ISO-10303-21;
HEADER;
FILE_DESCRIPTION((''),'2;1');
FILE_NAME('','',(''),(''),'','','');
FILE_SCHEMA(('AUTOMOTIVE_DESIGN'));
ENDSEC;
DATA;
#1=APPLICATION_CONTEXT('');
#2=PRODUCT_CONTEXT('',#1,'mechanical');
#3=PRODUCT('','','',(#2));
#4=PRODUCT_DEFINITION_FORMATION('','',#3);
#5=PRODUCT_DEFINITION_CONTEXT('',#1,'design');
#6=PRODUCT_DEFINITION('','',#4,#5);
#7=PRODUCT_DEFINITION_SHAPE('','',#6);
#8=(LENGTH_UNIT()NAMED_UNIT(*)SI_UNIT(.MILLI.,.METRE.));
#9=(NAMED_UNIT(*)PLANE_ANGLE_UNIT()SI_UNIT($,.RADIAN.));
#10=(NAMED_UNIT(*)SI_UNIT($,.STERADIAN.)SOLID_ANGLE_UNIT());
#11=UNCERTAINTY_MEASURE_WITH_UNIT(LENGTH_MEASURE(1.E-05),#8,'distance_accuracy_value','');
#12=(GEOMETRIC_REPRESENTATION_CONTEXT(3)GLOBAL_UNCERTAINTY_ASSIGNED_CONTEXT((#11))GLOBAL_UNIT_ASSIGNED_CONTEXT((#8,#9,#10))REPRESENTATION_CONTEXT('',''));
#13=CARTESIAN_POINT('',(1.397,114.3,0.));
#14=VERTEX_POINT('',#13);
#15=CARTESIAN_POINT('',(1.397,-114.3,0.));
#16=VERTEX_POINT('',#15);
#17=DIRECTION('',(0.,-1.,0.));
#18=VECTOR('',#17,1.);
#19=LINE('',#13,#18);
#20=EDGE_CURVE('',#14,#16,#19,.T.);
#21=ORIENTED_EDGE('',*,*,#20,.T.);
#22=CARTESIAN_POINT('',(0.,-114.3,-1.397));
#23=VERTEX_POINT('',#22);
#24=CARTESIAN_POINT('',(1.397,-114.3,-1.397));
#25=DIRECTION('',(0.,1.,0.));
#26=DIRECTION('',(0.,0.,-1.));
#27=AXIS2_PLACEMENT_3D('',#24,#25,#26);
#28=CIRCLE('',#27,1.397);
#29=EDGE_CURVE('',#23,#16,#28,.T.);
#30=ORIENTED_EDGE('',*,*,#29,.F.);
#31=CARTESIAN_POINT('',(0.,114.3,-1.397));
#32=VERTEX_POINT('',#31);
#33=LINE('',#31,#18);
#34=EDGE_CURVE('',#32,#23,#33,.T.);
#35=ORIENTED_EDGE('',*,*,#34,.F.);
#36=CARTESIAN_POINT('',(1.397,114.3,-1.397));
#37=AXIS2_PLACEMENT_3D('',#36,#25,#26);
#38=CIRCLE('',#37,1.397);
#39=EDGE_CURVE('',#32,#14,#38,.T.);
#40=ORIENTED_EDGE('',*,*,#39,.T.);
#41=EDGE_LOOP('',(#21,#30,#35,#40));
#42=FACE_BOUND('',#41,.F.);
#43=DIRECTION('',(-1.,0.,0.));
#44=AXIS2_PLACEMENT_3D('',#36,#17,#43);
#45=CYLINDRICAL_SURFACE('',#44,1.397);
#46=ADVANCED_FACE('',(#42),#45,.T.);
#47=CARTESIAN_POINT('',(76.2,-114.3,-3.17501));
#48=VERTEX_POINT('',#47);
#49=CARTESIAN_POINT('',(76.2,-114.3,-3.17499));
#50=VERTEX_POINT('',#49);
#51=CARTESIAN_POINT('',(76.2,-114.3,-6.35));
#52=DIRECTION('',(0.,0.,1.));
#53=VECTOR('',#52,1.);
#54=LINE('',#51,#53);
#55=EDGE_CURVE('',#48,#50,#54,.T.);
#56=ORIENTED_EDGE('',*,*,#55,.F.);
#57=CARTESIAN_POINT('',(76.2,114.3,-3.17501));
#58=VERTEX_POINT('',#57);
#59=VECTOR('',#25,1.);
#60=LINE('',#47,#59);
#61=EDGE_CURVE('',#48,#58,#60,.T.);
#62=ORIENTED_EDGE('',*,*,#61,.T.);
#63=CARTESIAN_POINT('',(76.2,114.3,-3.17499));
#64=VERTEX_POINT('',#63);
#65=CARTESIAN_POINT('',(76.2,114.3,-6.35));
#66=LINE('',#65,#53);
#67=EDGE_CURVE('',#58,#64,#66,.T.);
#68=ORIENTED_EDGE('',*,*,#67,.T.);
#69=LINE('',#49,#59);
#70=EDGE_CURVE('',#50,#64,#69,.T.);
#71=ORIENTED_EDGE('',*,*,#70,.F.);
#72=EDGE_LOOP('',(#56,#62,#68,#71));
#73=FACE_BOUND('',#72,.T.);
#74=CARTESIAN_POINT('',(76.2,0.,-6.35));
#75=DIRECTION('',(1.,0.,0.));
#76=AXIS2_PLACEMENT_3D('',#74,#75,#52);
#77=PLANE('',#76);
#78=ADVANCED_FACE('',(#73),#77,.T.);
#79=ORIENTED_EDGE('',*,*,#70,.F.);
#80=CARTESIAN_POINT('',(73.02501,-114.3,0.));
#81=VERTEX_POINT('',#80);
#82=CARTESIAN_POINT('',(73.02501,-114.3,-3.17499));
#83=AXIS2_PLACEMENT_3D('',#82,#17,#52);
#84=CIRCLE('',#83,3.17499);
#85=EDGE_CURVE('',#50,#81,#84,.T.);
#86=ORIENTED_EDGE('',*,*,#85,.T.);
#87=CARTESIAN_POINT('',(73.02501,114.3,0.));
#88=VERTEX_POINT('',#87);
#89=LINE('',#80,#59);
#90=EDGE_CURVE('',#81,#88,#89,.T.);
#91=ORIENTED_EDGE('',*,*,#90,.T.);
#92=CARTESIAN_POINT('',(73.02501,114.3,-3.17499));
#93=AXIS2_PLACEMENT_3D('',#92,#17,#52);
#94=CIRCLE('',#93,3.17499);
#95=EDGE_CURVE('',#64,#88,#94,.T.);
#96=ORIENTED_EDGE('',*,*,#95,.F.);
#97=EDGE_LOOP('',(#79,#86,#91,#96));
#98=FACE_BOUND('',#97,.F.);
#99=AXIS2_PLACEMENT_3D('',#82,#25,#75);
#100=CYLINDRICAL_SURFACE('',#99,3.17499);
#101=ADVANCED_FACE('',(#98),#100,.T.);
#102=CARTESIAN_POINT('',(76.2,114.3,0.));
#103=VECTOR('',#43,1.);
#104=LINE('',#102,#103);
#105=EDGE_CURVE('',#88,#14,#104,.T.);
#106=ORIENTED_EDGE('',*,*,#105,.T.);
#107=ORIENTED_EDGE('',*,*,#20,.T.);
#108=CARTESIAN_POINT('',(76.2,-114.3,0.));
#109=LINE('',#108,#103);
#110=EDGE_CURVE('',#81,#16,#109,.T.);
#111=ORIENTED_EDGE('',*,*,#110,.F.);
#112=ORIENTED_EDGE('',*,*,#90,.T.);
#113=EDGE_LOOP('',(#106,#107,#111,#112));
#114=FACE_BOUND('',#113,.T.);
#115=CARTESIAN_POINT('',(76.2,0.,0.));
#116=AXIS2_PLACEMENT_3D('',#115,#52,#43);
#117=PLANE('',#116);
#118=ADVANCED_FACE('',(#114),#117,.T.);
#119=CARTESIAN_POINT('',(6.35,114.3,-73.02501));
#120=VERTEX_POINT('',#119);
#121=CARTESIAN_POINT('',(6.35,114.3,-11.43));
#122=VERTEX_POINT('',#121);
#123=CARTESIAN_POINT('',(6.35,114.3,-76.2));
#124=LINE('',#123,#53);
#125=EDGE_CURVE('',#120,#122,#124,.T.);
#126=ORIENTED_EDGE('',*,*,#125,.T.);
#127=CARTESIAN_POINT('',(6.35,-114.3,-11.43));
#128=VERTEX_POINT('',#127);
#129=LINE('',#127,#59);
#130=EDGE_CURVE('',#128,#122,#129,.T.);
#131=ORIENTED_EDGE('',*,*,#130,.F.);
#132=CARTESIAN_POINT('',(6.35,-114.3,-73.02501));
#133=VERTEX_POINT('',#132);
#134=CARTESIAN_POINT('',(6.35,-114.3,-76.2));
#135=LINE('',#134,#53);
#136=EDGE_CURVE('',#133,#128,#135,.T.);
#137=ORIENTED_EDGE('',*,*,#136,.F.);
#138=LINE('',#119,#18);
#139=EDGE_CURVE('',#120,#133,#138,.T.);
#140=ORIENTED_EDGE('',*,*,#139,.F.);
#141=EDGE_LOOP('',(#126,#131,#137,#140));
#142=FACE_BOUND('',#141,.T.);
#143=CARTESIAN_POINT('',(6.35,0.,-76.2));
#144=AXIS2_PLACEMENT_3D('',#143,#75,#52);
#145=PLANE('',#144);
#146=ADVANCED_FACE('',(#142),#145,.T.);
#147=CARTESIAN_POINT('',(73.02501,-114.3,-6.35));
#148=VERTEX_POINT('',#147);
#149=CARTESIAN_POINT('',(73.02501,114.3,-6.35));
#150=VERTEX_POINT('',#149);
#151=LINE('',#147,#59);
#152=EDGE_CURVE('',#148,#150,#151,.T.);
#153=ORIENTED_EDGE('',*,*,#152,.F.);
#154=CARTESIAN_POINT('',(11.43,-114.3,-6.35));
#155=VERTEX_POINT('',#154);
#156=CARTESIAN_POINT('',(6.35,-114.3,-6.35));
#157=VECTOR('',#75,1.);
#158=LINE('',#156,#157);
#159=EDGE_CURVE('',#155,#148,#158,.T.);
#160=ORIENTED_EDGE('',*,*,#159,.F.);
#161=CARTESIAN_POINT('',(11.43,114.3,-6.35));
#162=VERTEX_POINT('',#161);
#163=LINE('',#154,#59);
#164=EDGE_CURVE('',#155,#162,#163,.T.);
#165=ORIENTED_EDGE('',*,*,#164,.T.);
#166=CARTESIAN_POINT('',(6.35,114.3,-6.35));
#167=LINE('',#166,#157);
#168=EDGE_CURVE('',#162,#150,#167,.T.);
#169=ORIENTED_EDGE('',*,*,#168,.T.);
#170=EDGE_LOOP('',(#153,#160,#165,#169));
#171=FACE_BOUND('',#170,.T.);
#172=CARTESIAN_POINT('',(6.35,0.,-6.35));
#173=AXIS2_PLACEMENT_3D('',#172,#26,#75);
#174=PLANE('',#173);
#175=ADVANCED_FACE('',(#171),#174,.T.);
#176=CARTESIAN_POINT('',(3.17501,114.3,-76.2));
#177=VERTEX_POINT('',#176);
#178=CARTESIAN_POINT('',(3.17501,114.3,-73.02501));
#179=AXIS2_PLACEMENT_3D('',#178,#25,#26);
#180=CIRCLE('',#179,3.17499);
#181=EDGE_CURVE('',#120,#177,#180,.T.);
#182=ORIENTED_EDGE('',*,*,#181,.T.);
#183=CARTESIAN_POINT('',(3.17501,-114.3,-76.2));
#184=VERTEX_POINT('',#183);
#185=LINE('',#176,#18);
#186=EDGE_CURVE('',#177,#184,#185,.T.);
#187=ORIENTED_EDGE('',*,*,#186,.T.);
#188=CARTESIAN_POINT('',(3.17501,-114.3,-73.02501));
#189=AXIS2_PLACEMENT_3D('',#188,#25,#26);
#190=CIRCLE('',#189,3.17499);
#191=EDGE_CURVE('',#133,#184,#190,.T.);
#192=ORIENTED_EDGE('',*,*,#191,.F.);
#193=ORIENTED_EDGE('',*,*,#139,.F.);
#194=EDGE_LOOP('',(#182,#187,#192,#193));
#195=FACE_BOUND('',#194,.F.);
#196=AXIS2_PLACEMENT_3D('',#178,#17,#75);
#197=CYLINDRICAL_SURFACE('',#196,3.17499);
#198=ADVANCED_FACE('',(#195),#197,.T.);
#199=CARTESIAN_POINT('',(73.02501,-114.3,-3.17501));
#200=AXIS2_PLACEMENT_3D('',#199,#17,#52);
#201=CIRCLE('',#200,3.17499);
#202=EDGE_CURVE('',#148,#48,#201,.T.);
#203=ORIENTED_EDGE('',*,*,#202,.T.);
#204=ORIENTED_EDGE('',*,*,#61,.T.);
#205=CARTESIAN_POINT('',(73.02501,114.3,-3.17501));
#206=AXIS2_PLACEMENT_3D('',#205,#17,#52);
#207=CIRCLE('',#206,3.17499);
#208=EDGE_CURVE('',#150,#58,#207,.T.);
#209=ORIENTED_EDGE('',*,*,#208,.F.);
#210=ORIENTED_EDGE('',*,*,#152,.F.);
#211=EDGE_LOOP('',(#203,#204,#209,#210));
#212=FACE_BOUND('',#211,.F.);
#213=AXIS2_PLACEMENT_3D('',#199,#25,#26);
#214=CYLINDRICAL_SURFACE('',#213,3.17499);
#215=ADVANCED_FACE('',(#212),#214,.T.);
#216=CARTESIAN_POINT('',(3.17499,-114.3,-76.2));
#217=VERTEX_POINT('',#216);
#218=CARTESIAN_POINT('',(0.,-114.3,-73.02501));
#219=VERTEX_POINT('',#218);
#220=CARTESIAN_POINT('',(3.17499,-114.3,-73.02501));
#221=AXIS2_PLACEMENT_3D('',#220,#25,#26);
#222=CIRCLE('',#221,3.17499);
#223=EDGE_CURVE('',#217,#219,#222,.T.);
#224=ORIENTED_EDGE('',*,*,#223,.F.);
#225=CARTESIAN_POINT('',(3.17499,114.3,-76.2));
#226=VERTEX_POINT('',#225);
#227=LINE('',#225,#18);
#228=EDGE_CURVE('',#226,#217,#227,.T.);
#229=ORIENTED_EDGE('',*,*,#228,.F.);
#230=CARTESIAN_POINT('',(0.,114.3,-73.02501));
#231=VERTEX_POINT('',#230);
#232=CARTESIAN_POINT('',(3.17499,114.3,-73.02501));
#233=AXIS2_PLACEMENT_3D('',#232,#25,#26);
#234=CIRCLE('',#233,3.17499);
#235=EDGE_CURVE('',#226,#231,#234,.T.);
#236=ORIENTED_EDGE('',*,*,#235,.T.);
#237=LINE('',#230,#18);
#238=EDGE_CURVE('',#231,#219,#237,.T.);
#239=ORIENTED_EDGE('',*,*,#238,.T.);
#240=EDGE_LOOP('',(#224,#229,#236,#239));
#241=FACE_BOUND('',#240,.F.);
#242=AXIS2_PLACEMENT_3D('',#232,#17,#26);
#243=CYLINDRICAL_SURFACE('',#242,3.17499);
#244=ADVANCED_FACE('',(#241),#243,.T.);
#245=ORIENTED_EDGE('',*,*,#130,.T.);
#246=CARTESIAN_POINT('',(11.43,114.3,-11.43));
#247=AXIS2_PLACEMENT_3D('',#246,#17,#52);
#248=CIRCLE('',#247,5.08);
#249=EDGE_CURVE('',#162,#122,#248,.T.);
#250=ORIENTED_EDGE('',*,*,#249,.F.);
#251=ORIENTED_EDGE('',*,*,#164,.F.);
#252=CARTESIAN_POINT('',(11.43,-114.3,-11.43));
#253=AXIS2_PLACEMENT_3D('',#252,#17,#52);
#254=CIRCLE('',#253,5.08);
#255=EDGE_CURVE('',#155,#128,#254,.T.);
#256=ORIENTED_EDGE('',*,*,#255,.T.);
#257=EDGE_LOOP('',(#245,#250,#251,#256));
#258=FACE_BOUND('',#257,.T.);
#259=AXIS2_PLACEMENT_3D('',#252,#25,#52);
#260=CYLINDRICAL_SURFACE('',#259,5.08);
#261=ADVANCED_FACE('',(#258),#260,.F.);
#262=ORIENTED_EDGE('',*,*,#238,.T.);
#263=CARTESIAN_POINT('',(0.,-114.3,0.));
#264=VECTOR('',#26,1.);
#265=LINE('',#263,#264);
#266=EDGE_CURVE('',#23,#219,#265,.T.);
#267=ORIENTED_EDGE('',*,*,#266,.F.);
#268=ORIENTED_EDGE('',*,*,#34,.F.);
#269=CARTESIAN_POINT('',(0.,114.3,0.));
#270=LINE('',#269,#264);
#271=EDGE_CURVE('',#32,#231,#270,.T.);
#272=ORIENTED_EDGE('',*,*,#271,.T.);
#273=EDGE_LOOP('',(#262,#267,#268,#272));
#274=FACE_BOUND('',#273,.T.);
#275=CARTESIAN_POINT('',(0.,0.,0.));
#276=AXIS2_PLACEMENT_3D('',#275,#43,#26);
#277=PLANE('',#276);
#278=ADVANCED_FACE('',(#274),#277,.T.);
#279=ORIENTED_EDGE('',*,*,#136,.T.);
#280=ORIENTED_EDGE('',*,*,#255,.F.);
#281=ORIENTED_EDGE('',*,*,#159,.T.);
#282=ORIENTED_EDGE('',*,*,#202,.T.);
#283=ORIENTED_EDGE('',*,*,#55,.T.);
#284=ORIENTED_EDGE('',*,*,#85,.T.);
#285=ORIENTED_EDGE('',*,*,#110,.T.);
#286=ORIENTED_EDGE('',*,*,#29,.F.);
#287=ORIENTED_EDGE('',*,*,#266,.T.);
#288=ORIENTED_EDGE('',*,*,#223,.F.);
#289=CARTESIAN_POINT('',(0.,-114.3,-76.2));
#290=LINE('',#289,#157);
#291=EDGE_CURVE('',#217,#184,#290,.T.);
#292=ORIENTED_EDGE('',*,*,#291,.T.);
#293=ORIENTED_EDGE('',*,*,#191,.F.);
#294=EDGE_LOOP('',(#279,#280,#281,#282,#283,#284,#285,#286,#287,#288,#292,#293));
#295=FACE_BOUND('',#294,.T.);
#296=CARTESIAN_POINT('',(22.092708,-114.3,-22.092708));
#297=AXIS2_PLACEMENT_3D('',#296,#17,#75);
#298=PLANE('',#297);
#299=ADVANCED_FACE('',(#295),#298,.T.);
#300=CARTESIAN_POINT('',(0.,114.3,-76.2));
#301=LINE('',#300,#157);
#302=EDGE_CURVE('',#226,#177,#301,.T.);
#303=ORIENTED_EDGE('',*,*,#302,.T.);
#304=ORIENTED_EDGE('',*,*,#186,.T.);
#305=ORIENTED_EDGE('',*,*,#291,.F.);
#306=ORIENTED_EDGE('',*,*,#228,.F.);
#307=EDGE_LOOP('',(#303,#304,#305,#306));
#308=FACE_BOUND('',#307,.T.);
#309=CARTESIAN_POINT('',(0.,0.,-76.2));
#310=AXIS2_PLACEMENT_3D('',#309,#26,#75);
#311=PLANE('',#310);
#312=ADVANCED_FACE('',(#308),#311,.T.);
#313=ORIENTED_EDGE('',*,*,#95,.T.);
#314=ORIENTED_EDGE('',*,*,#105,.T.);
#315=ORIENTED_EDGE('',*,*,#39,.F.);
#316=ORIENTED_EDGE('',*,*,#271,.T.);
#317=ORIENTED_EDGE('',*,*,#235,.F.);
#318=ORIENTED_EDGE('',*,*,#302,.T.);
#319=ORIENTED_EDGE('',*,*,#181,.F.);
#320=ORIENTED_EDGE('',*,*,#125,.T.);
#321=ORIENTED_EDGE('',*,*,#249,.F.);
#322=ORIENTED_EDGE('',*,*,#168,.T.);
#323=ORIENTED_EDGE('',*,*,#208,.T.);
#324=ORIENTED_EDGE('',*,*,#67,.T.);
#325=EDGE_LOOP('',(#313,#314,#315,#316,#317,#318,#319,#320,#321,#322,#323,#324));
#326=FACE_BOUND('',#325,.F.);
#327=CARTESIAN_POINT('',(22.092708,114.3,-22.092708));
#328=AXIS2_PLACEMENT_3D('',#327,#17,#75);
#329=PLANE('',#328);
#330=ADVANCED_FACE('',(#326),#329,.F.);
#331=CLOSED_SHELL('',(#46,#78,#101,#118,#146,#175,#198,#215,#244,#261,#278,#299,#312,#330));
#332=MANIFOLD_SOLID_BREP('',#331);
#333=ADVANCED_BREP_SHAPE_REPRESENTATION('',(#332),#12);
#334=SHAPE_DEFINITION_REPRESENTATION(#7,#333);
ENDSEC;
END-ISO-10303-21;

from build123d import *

# Parameters (mm, degrees)
F1_DEPTH = 114.3
F2_R     = 5.08
F3_R     = 3.17499
F4_R     = 1.397


# Not quite as in the source:
# - a fillet or chamfer is up to 0.001 mm smaller than in the source, because OpenCascade refuses the exact size


with BuildPart() as f1:
    # F0 (on Front) → F1 (new body, symmetric)
    with BuildSketch(Plane.XZ):
        Polygon((76.2, 0), (0, 0), (0, -76.2), (6.35, -76.2), (6.35, -6.35), (76.2, -6.35), align=None)
    extrude(amount=F1_DEPTH, both=True)

    # F2
    f2_edges = [f1.edges().sort_by_distance(p)[0] for p in [
        (6.35, 0, -6.35),
    ]]
    fillet(f2_edges, radius=F2_R)

    # F3 (radius 3.175 in the source; OpenCascade refuses exactly that, so slightly less here)
    f3_edges = [f1.edges().sort_by_distance(p)[0] for p in [
        (76.2, 0, -6.35),
        (76.2, 0, 0),
        (0, 0, -76.2),
        (6.35, 0, -76.2),
    ]]
    fillet(f3_edges, radius=F3_R)

    # F4
    f4_edges = [f1.edges().sort_by_distance(p)[0] for p in [
        (0, 0, 0),
    ]]
    fillet(f4_edges, radius=F4_R)


solid = f1.part
